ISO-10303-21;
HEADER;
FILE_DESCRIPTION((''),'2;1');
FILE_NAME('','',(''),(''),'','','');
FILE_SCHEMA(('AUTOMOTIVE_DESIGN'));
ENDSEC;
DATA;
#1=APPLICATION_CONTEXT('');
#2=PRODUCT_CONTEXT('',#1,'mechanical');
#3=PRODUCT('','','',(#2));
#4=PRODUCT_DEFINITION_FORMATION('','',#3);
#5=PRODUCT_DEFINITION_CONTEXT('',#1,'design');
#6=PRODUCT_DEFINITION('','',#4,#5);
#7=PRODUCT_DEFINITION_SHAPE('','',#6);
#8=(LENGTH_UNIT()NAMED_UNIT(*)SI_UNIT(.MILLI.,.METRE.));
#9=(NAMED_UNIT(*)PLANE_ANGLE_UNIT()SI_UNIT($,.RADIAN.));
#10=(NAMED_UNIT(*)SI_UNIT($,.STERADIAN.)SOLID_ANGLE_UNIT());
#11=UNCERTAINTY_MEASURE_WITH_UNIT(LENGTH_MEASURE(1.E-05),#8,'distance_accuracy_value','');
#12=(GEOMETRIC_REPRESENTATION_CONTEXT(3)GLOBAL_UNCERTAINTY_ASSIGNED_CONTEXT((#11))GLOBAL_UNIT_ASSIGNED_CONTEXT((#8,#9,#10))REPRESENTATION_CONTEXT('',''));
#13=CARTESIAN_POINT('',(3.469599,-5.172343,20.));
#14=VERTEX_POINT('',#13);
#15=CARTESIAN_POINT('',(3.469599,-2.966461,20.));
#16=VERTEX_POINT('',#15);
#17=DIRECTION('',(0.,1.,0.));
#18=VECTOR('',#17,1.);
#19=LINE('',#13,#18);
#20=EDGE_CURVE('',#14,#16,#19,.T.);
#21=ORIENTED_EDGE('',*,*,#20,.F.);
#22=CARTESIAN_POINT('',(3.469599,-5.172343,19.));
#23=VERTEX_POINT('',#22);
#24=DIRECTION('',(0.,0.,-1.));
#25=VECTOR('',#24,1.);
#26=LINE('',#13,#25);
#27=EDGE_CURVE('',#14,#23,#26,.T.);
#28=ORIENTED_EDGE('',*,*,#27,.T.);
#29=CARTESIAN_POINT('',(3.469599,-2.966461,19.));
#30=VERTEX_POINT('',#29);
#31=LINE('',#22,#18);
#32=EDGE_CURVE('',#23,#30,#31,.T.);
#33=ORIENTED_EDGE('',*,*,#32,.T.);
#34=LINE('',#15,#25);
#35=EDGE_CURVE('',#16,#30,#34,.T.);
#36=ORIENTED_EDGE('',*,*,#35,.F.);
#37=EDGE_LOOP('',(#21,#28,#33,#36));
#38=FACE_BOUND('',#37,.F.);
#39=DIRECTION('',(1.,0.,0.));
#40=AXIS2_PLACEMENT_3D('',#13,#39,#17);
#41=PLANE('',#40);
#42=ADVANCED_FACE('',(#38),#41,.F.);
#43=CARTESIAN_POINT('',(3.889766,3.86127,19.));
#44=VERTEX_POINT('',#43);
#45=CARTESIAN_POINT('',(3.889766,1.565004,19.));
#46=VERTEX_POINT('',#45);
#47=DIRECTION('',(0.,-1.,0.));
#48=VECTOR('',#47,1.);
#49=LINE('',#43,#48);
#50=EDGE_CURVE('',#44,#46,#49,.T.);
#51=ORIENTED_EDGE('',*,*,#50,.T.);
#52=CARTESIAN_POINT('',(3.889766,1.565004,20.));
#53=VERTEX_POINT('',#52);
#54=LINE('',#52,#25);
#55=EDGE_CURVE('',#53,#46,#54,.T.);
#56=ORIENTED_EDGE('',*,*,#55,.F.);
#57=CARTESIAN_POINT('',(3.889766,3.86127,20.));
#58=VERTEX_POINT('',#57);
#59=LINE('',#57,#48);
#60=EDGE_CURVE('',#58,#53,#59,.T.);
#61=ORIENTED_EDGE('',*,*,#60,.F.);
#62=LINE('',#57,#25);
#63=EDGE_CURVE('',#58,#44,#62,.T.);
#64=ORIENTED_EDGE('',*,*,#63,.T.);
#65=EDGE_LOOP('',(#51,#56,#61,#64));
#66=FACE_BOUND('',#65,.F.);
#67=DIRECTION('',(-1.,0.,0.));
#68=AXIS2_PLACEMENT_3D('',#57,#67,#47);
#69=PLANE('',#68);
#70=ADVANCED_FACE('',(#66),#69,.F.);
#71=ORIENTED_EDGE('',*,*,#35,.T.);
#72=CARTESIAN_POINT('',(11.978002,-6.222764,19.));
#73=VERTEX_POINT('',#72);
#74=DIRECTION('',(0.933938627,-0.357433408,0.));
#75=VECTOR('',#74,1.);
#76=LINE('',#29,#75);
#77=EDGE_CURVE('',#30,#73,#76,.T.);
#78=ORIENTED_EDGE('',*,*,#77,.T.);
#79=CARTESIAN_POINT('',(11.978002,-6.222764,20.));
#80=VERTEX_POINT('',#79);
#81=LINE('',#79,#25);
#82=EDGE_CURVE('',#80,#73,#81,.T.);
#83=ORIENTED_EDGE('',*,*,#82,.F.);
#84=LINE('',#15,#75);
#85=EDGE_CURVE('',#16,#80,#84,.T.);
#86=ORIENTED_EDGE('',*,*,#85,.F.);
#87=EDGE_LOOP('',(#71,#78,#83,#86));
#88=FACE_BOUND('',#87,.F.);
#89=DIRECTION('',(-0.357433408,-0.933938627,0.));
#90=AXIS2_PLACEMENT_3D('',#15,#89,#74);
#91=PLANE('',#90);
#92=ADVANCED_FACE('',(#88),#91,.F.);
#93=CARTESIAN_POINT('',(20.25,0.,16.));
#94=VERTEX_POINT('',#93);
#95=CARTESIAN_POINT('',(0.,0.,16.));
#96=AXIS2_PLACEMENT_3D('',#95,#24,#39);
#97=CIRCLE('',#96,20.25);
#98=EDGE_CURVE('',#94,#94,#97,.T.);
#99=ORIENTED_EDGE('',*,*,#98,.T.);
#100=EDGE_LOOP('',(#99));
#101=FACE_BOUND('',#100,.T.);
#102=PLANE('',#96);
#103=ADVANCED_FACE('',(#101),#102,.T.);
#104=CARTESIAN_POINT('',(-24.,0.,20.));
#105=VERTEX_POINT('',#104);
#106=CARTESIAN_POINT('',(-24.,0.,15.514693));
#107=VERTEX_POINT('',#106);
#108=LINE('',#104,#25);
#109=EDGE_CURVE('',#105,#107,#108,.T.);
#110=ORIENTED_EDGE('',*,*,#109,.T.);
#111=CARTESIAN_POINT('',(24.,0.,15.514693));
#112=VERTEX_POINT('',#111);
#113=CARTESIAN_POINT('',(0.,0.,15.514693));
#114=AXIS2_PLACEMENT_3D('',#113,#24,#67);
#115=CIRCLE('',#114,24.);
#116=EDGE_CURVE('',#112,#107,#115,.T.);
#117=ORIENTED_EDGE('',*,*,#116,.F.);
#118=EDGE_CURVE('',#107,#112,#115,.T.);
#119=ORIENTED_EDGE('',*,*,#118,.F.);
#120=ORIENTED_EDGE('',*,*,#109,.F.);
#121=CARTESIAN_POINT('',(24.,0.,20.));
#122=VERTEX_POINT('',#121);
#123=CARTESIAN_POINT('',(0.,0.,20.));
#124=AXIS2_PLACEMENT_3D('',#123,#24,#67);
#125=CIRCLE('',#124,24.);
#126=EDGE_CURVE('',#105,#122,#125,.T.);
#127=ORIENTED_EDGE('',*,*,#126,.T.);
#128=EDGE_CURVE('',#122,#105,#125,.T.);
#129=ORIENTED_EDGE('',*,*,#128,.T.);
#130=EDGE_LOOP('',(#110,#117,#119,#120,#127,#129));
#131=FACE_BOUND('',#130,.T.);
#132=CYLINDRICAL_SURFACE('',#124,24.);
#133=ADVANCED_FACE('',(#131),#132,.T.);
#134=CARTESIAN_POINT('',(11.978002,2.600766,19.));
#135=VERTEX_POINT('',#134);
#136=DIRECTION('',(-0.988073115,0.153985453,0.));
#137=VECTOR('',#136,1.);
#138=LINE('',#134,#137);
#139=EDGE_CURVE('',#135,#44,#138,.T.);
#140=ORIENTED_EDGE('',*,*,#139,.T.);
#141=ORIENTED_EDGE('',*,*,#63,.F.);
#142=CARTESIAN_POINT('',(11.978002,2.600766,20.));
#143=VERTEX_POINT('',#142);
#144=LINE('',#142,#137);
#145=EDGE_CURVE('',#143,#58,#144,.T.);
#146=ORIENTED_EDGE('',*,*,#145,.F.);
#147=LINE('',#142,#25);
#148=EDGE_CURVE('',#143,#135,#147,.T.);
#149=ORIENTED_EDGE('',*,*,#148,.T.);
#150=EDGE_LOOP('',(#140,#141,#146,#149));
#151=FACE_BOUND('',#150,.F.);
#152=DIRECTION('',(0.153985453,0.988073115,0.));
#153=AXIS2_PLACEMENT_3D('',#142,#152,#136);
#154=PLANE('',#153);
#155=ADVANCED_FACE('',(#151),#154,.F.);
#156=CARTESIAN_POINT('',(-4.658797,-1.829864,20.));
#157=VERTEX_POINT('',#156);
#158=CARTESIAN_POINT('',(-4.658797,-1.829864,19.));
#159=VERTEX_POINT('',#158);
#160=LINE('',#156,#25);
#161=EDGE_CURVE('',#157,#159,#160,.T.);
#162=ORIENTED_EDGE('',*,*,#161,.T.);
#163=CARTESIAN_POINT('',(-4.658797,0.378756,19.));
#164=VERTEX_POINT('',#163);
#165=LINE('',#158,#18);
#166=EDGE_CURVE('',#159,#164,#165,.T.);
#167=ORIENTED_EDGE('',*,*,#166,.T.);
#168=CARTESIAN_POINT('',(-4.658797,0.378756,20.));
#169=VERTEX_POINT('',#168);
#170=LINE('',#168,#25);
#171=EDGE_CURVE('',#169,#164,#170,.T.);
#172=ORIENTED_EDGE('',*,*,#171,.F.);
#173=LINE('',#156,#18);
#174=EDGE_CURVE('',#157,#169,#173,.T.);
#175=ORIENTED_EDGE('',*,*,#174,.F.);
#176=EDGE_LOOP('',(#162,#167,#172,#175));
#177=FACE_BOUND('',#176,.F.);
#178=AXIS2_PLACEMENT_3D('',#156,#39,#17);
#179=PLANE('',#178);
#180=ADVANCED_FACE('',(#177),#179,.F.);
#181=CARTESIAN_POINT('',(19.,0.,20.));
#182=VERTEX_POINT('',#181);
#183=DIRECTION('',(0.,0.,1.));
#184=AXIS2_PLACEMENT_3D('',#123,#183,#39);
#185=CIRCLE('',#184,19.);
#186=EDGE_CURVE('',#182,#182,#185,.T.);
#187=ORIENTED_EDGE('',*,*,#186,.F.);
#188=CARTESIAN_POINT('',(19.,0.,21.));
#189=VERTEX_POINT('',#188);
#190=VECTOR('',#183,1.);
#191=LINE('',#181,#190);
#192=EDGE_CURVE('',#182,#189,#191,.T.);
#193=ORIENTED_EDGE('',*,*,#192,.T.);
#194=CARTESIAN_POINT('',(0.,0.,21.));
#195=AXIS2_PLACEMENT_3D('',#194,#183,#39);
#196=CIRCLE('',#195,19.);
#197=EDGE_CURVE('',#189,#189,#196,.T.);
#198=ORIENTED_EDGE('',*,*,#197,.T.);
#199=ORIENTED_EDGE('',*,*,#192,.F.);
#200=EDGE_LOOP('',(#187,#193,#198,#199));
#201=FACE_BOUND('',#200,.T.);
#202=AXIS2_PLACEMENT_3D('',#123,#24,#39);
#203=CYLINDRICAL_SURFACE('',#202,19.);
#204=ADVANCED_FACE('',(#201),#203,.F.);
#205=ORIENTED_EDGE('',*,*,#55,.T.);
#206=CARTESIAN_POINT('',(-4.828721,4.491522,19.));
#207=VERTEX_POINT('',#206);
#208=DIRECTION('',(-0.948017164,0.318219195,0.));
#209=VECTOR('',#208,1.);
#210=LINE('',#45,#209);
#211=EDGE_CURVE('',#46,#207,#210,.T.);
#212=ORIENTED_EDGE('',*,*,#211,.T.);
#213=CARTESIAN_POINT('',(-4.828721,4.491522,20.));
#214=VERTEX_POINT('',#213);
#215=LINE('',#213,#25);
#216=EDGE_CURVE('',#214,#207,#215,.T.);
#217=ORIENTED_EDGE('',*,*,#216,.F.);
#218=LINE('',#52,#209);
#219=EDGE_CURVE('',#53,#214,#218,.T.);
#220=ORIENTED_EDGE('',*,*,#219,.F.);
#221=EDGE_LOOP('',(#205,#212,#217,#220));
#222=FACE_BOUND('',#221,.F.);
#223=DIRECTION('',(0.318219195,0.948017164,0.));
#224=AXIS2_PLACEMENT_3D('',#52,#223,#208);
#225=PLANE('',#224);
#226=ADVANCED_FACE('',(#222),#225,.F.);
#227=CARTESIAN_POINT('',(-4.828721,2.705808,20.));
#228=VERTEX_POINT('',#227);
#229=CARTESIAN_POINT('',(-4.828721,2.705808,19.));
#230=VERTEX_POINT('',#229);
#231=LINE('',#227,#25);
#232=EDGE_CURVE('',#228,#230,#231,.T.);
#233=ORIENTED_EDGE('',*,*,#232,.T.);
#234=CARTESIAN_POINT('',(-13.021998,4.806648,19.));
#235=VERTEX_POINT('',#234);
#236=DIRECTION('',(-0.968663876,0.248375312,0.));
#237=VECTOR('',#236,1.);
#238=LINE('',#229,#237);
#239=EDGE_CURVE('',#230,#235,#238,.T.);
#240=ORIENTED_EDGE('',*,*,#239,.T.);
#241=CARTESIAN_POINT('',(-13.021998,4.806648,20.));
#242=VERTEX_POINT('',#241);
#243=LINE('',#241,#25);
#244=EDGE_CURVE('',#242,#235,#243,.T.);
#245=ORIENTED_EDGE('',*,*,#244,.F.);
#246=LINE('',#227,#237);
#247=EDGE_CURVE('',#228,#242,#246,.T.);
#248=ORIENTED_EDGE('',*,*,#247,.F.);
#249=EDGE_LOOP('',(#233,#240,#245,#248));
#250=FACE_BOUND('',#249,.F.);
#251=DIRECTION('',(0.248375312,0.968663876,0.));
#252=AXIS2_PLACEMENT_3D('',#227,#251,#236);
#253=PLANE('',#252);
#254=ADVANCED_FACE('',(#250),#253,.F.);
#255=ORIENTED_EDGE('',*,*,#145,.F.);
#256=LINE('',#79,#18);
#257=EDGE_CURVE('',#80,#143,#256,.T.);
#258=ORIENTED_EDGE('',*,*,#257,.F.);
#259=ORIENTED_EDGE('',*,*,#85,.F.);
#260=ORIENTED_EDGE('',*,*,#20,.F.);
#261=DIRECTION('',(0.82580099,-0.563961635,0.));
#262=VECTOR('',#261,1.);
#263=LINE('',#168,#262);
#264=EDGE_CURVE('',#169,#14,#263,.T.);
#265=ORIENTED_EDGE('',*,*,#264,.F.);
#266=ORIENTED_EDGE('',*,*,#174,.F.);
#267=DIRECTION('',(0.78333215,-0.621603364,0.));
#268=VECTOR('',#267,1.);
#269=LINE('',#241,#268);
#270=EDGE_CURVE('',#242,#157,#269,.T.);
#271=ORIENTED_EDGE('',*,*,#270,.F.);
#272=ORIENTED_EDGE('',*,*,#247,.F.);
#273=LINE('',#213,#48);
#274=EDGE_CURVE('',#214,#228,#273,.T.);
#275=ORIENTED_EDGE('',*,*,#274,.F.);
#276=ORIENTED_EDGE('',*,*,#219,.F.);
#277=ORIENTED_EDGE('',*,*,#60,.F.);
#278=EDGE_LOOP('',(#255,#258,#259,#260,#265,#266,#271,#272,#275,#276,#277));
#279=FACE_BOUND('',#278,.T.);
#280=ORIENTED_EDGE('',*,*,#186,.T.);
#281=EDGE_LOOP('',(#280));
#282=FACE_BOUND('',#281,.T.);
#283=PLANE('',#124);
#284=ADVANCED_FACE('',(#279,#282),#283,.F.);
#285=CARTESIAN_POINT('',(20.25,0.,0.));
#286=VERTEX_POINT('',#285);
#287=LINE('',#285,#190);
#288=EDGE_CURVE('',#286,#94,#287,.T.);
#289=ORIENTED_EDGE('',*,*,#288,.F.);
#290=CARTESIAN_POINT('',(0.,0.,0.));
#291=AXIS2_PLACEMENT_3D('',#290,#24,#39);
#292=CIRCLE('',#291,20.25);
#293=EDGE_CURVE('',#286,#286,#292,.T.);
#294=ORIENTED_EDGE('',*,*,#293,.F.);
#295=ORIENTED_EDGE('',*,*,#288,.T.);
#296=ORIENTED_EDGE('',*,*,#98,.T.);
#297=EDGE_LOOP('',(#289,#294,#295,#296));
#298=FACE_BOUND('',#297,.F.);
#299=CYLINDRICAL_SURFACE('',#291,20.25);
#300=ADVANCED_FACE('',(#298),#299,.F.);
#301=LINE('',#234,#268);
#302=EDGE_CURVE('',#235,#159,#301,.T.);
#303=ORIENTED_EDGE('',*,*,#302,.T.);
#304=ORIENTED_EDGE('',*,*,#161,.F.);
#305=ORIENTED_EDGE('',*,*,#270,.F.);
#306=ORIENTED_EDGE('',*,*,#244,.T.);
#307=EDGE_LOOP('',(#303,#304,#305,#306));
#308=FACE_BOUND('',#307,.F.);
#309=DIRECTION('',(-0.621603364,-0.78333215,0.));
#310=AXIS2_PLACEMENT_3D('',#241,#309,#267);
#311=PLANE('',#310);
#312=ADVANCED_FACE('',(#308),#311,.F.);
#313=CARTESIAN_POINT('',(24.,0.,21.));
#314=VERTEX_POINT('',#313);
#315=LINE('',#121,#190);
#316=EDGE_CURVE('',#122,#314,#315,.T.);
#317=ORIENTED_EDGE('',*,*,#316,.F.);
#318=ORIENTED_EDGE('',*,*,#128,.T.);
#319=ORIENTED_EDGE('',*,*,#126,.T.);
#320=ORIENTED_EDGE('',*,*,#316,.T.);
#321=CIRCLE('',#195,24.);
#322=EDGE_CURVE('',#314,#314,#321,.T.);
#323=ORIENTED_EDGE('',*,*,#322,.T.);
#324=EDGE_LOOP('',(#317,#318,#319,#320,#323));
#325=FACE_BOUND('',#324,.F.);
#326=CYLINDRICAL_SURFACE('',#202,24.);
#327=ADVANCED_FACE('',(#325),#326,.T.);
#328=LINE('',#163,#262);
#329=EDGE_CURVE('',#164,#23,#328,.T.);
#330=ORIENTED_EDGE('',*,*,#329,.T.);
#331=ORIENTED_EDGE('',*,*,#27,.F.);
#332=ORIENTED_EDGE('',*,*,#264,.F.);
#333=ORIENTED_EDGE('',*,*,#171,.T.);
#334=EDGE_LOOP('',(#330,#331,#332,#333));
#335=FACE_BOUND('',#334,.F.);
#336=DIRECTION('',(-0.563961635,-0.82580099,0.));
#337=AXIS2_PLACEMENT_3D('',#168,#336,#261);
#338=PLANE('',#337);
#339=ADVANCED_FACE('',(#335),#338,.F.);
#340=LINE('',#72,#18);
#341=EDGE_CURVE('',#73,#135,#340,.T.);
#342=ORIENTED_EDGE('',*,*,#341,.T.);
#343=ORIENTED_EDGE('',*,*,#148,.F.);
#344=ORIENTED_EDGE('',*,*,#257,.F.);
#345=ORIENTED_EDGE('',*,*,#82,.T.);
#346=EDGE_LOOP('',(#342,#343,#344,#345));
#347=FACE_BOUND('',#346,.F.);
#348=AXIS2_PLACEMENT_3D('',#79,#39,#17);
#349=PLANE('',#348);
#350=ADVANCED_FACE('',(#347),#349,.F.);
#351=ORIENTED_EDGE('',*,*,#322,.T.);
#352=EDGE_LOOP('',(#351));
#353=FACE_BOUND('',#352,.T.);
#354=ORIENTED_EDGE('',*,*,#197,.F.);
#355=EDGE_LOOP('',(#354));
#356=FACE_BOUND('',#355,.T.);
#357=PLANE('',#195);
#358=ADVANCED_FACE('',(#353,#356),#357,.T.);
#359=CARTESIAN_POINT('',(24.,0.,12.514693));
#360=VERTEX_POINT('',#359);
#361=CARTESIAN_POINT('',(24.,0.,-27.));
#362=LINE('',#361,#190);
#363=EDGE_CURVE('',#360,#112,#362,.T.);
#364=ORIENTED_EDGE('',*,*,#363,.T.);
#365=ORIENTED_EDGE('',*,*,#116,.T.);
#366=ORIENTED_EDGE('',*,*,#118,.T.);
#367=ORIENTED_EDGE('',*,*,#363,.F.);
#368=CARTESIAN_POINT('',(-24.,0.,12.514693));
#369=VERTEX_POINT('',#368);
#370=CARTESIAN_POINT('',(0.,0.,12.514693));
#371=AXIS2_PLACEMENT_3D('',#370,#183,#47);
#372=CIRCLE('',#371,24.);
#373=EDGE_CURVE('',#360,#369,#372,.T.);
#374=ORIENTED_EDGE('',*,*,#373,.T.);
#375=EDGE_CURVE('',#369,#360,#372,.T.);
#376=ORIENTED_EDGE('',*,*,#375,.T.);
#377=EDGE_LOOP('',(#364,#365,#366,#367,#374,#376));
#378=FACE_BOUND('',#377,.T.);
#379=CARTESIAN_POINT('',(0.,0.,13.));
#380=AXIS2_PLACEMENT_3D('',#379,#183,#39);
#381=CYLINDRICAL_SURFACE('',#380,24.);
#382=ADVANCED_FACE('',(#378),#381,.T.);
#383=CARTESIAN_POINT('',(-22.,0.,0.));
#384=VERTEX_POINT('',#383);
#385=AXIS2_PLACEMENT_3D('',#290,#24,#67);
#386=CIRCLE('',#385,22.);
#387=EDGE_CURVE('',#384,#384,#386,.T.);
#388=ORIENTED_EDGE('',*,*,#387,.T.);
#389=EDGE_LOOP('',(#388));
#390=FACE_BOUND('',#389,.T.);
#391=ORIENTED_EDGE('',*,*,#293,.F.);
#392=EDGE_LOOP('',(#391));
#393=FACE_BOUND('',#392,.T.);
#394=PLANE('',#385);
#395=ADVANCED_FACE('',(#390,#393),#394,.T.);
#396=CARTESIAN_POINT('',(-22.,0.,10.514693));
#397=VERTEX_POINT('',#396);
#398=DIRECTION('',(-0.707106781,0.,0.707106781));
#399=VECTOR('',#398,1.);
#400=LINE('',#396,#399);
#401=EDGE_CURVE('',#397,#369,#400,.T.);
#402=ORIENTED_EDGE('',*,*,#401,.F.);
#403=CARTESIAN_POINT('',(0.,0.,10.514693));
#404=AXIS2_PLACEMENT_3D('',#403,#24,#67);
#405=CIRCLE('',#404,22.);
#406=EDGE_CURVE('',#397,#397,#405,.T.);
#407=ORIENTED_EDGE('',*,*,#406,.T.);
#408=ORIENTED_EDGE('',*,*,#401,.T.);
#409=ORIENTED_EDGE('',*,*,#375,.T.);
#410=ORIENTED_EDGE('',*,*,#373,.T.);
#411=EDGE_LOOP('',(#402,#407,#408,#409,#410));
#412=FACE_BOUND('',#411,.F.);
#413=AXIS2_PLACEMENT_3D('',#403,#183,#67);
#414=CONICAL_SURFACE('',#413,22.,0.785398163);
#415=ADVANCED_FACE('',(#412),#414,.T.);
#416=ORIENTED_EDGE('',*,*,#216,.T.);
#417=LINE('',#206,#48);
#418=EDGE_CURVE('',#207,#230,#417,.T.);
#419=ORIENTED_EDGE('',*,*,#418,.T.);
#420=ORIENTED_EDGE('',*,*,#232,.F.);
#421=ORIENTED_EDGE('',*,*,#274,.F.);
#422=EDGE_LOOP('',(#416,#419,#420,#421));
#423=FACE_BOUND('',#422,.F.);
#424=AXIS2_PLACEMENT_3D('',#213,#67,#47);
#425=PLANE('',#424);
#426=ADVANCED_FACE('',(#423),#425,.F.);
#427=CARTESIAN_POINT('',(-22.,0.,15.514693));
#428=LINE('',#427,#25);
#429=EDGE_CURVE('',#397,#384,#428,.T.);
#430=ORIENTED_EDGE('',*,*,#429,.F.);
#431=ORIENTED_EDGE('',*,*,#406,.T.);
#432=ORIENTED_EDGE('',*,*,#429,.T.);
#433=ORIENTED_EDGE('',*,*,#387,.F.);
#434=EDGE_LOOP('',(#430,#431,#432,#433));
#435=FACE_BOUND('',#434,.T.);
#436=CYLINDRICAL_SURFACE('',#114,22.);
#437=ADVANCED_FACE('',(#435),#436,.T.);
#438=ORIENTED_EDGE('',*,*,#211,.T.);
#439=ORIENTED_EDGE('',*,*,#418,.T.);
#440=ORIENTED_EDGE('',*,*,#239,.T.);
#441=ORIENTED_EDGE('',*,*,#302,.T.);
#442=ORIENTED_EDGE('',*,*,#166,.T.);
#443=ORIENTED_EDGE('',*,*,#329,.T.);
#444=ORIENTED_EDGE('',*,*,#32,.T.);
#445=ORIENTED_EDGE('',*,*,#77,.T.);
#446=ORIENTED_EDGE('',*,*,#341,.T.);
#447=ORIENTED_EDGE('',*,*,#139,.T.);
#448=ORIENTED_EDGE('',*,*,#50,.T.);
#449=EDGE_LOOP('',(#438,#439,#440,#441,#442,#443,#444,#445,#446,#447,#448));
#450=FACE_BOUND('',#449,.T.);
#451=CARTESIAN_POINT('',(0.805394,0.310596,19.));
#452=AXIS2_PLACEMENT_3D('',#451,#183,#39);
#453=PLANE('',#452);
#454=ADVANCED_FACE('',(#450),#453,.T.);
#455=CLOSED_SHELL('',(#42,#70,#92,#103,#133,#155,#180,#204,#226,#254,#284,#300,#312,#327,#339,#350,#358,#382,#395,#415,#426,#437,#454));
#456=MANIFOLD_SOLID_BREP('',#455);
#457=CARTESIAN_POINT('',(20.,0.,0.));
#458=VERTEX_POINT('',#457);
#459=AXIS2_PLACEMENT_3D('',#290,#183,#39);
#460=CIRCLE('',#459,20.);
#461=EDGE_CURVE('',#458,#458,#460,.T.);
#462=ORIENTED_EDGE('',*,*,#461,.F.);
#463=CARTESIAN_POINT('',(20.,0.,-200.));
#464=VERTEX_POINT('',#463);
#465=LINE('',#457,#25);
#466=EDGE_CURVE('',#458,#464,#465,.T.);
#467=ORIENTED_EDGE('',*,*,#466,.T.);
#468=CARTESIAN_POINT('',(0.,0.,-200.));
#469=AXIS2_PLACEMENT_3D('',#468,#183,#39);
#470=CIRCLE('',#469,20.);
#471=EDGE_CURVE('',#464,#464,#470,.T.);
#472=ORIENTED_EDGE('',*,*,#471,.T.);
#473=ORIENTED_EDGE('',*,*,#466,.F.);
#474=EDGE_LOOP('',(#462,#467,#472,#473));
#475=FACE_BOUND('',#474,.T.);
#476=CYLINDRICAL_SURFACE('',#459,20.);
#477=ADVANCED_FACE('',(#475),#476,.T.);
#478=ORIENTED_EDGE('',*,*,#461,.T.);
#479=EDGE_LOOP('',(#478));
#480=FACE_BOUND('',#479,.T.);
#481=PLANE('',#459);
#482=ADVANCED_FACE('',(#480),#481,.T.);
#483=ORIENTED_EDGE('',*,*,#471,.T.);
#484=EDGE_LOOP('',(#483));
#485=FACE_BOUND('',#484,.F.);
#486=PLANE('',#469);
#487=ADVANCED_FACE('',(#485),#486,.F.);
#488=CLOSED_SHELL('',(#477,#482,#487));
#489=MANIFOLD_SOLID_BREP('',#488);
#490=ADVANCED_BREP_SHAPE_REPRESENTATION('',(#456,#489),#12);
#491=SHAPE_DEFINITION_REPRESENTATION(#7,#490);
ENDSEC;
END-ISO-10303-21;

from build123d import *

# Parameters (mm, degrees)
F2_R         = 20
F3_DEPTH     = 200
F6_DEPTH     = 1
F5_R         = 24
F5_R_2       = 19
F7_DEPTH     = 1
F8_R         = 20.25
F9_DEPTH     = 16
F10_S5_R     = 24
F10_T6_DEPTH = 40


# Not quite as in the source:
# - a fillet or chamfer that OpenCascade refuses, or shapes differently, is made with other operations: its cross-section is extruded or revolved along the edge and cut away or added


with BuildPart() as f1:
    # F0 (on Front) → F1 (revolve)
    with BuildSketch(Plane.XZ):
        Polygon((-22, 0), (-20, 0), (0, 0), (0, 20), (-22, 20), (-24, 20), (-24, 15.5146932229), (-22, 15.5146932229), align=None)
    revolve(axis=Axis((0, 0, 10), (0, 0, -1)))

    # F5 (on face) → F6 (cut)
    with BuildSketch(Plane.XY.offset(20)):
        Polygon((11.9780020788, -6.2227640148), (11.9780020788, 2.6007659641), (3.8897663796, 3.8612704928), (3.8897663796, 1.5650035572), (-4.8287207231, 4.4915222406), (-4.8287207231, 2.705808496), (-13.0219979212, 4.8066484589), (-4.6587968989, -1.829864401), (-4.6587968989, 0.3787560728), (3.4695986625, -5.1723431725), (3.4695986625, -2.9664605056), align=None)
    extrude(amount=-F6_DEPTH, mode=Mode.SUBTRACT)

    # F5 (on face) → F7 (join)
    with BuildSketch(Plane.XY.offset(20)):
        Circle(F5_R)
        Circle(F5_R_2, mode=Mode.SUBTRACT)
    extrude(amount=F7_DEPTH)

    # F8 (on face) → F9 (cut)
    with BuildSketch(Plane(origin=(0, 0, 0), x_dir=(1, 0, 0), z_dir=(0, 0, -1))):
        Circle(F8_R)
    extrude(amount=-F9_DEPTH, mode=Mode.SUBTRACT)

    # F10: chamfer of 5 on 1 edges, made by hand


with BuildPart() as f3:
    # F2 (on Top) → F3 (new body)
    with BuildSketch(Plane.XY):
        Circle(F2_R)
    extrude(amount=-F3_DEPTH)


with BuildPart() as f10_tool2:
    # F10_s3 → F10_t4 (revolve)
    with BuildSketch(Plane.XZ):
        Polygon((-22, 10.5146932229), (-27, 15.5146932229), (-22, 15.5146932229), align=None)
    revolve(axis=Axis((0, 0, 15.5146932229), (0, 0, -1)))

    # F10_s5 → F10_t6 (intersect, symmetric)
    with BuildSketch(Plane.XY.offset(13)):
        Circle(F10_S5_R)
    extrude(amount=F10_T6_DEPTH, both=True, mode=Mode.INTERSECT)


with BuildPart() as f1_1:
    add(f1.part)

    # F10_t1: union F10_tool2
    add(f10_tool2.part)


solid = Compound([f3.part, f1_1.part])
